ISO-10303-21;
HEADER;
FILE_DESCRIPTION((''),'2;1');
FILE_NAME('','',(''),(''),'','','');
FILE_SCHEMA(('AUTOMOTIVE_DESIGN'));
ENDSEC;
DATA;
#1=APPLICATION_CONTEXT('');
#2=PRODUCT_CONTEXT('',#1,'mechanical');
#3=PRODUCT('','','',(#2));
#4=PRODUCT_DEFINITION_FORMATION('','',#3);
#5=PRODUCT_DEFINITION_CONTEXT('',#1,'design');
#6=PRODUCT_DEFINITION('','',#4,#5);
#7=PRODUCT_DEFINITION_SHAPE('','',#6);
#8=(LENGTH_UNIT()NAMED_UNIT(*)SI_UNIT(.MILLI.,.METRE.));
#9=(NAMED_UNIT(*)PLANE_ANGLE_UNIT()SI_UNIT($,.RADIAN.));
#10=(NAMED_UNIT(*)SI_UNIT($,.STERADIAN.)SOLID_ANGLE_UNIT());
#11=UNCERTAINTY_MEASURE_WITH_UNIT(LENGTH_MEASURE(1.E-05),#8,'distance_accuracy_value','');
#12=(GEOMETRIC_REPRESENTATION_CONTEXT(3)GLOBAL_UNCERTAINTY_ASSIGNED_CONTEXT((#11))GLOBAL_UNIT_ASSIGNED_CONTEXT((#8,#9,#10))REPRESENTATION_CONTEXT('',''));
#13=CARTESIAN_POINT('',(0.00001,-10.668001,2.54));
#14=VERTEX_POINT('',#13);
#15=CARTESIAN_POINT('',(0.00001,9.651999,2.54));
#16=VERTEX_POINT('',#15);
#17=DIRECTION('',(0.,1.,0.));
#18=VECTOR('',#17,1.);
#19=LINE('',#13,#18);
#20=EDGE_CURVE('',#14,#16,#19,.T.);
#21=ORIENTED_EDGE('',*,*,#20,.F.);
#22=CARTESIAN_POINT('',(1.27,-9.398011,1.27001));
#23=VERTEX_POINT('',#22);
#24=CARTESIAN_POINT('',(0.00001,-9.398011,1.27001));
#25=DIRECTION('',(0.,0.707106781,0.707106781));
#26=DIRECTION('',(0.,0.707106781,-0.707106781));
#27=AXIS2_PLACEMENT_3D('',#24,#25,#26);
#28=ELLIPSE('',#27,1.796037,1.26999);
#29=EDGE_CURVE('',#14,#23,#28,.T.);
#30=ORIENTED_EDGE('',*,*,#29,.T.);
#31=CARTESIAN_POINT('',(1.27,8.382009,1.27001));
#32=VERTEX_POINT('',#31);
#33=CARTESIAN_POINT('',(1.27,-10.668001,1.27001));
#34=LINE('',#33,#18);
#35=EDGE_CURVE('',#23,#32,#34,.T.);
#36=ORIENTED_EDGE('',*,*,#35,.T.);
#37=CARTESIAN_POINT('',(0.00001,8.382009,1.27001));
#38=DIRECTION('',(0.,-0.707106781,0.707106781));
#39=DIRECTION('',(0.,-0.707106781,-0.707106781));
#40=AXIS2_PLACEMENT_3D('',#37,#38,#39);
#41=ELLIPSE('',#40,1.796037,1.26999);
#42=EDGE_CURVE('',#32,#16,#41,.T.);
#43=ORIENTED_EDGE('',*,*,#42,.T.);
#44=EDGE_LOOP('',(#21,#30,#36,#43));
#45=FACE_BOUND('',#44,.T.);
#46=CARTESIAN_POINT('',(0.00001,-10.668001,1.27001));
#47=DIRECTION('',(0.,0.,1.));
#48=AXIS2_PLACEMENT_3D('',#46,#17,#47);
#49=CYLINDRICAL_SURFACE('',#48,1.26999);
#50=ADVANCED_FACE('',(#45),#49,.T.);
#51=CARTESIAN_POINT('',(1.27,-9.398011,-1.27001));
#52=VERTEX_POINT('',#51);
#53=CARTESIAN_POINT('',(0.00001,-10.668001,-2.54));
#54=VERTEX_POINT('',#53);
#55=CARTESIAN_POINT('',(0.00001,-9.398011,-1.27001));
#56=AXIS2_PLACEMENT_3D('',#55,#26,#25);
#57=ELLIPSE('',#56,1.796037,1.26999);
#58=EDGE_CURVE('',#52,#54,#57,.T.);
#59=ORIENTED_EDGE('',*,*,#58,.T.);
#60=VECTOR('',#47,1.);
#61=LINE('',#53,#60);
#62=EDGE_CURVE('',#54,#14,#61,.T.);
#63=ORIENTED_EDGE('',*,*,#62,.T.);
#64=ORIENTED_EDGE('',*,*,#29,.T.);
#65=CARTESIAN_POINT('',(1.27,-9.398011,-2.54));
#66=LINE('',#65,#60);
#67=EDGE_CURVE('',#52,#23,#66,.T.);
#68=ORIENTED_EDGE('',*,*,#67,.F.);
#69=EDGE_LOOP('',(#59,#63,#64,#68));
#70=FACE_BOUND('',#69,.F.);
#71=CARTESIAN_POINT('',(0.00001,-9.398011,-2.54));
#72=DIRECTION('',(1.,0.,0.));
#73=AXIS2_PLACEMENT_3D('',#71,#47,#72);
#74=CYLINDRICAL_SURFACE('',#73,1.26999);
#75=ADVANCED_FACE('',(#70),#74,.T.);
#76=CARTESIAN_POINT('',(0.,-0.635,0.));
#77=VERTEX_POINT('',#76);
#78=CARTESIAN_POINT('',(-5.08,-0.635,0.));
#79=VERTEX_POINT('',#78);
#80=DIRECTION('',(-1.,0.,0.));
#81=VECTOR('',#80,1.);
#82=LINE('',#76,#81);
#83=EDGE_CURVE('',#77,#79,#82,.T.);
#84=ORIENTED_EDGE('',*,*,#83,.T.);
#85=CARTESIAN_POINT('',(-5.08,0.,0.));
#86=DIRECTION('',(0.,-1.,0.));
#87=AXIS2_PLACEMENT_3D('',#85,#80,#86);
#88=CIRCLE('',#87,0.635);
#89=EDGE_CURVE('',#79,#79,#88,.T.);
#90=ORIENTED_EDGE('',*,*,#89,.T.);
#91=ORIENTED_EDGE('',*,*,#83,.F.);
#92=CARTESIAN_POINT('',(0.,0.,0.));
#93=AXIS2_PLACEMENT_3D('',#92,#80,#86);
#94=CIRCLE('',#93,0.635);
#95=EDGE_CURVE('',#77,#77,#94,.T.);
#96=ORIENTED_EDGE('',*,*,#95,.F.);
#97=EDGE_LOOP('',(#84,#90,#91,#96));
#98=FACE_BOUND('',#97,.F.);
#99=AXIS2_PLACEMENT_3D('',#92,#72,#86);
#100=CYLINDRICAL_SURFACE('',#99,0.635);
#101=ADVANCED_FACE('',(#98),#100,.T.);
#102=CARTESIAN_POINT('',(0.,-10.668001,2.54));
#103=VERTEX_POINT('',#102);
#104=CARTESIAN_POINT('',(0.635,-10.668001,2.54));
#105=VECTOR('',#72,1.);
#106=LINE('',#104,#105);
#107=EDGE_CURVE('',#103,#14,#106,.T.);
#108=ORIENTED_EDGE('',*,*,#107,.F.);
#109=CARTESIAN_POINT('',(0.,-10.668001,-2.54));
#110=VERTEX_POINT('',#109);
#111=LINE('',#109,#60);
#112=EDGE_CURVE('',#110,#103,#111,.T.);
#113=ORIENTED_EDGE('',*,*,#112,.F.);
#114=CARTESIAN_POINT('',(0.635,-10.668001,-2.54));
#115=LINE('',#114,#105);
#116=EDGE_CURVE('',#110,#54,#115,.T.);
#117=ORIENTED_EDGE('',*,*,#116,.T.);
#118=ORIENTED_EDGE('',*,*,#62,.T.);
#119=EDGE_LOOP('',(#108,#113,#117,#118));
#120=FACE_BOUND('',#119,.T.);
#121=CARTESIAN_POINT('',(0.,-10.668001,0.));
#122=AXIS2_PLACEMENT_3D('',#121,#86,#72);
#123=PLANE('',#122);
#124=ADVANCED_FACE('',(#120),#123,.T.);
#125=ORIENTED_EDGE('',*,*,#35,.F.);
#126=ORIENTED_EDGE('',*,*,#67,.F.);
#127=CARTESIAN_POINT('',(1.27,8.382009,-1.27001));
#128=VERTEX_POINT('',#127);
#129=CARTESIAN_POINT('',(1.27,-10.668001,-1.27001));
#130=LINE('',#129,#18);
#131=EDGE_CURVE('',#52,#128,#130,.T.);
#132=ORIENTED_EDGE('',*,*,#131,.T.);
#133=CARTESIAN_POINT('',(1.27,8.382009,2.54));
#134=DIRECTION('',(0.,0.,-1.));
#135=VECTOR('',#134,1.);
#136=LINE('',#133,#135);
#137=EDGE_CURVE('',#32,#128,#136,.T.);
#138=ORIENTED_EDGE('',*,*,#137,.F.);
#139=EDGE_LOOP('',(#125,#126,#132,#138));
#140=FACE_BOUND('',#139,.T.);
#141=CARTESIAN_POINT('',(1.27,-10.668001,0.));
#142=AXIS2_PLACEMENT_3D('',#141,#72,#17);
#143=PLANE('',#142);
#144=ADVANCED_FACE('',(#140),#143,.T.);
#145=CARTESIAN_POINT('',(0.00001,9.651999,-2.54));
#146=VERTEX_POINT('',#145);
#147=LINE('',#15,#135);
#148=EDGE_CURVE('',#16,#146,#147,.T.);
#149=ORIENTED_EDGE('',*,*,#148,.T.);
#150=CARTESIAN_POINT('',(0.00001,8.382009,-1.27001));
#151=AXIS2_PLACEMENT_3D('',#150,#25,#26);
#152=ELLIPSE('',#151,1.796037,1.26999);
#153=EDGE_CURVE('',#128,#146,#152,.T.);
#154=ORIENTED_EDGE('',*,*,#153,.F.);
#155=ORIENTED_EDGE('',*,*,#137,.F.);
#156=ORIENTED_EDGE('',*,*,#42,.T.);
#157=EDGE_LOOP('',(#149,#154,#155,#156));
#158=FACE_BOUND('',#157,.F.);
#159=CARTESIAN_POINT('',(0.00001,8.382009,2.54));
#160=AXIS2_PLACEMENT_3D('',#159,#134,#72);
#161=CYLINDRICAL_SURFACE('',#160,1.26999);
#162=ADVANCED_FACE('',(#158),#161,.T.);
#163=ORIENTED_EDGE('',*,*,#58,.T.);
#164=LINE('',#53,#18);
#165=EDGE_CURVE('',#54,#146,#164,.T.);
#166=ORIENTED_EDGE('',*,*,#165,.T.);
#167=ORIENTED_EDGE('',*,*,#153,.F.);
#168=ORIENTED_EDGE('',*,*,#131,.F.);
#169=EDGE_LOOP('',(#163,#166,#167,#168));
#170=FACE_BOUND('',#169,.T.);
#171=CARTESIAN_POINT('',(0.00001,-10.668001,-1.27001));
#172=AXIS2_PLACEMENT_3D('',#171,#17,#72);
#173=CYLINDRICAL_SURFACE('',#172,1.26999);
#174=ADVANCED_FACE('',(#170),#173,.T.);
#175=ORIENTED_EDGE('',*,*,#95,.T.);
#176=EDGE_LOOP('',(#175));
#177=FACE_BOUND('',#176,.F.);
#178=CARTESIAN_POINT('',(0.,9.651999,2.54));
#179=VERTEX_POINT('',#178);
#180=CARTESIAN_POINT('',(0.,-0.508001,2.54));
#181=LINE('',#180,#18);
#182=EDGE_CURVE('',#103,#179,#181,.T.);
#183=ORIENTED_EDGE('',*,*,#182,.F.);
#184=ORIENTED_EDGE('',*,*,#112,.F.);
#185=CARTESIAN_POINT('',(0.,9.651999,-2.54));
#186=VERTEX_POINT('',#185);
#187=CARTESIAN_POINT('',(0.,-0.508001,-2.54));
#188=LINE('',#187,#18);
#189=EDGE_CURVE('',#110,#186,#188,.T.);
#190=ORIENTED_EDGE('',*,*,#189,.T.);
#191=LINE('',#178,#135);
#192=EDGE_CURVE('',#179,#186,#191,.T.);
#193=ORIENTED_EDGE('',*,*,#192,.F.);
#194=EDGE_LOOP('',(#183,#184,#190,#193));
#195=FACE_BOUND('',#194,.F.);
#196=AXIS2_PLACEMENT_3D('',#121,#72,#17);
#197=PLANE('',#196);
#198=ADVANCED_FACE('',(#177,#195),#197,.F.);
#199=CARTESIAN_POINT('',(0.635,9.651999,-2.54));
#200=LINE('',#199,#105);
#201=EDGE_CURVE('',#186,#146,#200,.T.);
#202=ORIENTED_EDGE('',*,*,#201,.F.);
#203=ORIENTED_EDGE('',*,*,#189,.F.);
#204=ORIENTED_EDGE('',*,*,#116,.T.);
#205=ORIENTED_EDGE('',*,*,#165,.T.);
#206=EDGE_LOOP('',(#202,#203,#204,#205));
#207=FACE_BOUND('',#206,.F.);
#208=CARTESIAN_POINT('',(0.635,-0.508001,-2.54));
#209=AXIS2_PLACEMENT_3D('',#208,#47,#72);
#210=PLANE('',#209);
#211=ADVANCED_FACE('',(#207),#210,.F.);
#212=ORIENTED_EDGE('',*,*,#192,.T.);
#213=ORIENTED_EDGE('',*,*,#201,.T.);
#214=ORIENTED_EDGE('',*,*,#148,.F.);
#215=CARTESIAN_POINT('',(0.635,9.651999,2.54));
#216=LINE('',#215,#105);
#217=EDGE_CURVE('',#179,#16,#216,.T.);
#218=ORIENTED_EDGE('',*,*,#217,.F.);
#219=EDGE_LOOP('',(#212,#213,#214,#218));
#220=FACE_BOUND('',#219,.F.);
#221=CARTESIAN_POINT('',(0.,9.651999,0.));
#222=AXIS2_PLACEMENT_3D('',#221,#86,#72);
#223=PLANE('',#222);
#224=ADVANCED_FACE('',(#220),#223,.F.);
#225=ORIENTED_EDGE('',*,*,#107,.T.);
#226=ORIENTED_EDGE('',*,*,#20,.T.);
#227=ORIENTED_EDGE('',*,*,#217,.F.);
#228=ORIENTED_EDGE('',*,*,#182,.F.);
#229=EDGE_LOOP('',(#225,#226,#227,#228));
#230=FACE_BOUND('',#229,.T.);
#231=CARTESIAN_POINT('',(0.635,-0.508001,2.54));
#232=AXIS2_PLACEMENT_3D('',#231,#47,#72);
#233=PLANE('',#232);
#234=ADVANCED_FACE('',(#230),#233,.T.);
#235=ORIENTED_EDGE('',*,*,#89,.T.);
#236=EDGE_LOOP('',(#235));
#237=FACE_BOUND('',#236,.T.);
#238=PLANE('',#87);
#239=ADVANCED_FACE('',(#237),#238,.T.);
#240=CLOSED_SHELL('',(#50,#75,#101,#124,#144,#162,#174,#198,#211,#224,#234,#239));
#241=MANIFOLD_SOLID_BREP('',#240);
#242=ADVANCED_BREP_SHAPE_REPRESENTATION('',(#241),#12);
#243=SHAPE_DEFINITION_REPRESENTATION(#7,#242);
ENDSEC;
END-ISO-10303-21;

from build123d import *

# Parameters (mm, degrees)
F0_W          = 1.27
F0_H          = 20.32
F1_DEPTH      = 2.54
F1_DEPTH_BACK = 2.54
F2_R          = 1.26999
F3_R          = 0.635
F4_DEPTH      = 5.08


# Not quite as in the source:
# - a fillet or chamfer is up to 0.001 mm smaller than in the source, because OpenCascade refuses the exact size


with BuildPart() as f1:
    # F0 (on Top) → F1 (new body, two sides)
    with BuildSketch(Plane.XY) as f1_sk:
        with Locations((0.635, -0.508000601)):
            Rectangle(F0_W, F0_H)
    extrude(amount=F1_DEPTH)
    extrude(f1_sk.sketch, amount=-F1_DEPTH_BACK)

    # F2 (radius 1.27 in the source; OpenCascade refuses exactly that, so slightly less here)
    f2_edges = [f1.edges().sort_by_distance(p)[0] for p in [
        (1.27, 9.651999, 0),
        (1.27, -0.508001, 2.54),
        (1.27, -0.508001, -2.54),
        (1.27, -10.668001, 0),
    ]]
    fillet(f2_edges, radius=F2_R)

    # F3 (on face) → F4 (join)
    with BuildSketch(Plane(origin=(0, 0, 0), x_dir=(0, -1, 0), z_dir=(-1, 0, 0))):
        Circle(F3_R)
    extrude(amount=F4_DEPTH)


solid = f1.part
